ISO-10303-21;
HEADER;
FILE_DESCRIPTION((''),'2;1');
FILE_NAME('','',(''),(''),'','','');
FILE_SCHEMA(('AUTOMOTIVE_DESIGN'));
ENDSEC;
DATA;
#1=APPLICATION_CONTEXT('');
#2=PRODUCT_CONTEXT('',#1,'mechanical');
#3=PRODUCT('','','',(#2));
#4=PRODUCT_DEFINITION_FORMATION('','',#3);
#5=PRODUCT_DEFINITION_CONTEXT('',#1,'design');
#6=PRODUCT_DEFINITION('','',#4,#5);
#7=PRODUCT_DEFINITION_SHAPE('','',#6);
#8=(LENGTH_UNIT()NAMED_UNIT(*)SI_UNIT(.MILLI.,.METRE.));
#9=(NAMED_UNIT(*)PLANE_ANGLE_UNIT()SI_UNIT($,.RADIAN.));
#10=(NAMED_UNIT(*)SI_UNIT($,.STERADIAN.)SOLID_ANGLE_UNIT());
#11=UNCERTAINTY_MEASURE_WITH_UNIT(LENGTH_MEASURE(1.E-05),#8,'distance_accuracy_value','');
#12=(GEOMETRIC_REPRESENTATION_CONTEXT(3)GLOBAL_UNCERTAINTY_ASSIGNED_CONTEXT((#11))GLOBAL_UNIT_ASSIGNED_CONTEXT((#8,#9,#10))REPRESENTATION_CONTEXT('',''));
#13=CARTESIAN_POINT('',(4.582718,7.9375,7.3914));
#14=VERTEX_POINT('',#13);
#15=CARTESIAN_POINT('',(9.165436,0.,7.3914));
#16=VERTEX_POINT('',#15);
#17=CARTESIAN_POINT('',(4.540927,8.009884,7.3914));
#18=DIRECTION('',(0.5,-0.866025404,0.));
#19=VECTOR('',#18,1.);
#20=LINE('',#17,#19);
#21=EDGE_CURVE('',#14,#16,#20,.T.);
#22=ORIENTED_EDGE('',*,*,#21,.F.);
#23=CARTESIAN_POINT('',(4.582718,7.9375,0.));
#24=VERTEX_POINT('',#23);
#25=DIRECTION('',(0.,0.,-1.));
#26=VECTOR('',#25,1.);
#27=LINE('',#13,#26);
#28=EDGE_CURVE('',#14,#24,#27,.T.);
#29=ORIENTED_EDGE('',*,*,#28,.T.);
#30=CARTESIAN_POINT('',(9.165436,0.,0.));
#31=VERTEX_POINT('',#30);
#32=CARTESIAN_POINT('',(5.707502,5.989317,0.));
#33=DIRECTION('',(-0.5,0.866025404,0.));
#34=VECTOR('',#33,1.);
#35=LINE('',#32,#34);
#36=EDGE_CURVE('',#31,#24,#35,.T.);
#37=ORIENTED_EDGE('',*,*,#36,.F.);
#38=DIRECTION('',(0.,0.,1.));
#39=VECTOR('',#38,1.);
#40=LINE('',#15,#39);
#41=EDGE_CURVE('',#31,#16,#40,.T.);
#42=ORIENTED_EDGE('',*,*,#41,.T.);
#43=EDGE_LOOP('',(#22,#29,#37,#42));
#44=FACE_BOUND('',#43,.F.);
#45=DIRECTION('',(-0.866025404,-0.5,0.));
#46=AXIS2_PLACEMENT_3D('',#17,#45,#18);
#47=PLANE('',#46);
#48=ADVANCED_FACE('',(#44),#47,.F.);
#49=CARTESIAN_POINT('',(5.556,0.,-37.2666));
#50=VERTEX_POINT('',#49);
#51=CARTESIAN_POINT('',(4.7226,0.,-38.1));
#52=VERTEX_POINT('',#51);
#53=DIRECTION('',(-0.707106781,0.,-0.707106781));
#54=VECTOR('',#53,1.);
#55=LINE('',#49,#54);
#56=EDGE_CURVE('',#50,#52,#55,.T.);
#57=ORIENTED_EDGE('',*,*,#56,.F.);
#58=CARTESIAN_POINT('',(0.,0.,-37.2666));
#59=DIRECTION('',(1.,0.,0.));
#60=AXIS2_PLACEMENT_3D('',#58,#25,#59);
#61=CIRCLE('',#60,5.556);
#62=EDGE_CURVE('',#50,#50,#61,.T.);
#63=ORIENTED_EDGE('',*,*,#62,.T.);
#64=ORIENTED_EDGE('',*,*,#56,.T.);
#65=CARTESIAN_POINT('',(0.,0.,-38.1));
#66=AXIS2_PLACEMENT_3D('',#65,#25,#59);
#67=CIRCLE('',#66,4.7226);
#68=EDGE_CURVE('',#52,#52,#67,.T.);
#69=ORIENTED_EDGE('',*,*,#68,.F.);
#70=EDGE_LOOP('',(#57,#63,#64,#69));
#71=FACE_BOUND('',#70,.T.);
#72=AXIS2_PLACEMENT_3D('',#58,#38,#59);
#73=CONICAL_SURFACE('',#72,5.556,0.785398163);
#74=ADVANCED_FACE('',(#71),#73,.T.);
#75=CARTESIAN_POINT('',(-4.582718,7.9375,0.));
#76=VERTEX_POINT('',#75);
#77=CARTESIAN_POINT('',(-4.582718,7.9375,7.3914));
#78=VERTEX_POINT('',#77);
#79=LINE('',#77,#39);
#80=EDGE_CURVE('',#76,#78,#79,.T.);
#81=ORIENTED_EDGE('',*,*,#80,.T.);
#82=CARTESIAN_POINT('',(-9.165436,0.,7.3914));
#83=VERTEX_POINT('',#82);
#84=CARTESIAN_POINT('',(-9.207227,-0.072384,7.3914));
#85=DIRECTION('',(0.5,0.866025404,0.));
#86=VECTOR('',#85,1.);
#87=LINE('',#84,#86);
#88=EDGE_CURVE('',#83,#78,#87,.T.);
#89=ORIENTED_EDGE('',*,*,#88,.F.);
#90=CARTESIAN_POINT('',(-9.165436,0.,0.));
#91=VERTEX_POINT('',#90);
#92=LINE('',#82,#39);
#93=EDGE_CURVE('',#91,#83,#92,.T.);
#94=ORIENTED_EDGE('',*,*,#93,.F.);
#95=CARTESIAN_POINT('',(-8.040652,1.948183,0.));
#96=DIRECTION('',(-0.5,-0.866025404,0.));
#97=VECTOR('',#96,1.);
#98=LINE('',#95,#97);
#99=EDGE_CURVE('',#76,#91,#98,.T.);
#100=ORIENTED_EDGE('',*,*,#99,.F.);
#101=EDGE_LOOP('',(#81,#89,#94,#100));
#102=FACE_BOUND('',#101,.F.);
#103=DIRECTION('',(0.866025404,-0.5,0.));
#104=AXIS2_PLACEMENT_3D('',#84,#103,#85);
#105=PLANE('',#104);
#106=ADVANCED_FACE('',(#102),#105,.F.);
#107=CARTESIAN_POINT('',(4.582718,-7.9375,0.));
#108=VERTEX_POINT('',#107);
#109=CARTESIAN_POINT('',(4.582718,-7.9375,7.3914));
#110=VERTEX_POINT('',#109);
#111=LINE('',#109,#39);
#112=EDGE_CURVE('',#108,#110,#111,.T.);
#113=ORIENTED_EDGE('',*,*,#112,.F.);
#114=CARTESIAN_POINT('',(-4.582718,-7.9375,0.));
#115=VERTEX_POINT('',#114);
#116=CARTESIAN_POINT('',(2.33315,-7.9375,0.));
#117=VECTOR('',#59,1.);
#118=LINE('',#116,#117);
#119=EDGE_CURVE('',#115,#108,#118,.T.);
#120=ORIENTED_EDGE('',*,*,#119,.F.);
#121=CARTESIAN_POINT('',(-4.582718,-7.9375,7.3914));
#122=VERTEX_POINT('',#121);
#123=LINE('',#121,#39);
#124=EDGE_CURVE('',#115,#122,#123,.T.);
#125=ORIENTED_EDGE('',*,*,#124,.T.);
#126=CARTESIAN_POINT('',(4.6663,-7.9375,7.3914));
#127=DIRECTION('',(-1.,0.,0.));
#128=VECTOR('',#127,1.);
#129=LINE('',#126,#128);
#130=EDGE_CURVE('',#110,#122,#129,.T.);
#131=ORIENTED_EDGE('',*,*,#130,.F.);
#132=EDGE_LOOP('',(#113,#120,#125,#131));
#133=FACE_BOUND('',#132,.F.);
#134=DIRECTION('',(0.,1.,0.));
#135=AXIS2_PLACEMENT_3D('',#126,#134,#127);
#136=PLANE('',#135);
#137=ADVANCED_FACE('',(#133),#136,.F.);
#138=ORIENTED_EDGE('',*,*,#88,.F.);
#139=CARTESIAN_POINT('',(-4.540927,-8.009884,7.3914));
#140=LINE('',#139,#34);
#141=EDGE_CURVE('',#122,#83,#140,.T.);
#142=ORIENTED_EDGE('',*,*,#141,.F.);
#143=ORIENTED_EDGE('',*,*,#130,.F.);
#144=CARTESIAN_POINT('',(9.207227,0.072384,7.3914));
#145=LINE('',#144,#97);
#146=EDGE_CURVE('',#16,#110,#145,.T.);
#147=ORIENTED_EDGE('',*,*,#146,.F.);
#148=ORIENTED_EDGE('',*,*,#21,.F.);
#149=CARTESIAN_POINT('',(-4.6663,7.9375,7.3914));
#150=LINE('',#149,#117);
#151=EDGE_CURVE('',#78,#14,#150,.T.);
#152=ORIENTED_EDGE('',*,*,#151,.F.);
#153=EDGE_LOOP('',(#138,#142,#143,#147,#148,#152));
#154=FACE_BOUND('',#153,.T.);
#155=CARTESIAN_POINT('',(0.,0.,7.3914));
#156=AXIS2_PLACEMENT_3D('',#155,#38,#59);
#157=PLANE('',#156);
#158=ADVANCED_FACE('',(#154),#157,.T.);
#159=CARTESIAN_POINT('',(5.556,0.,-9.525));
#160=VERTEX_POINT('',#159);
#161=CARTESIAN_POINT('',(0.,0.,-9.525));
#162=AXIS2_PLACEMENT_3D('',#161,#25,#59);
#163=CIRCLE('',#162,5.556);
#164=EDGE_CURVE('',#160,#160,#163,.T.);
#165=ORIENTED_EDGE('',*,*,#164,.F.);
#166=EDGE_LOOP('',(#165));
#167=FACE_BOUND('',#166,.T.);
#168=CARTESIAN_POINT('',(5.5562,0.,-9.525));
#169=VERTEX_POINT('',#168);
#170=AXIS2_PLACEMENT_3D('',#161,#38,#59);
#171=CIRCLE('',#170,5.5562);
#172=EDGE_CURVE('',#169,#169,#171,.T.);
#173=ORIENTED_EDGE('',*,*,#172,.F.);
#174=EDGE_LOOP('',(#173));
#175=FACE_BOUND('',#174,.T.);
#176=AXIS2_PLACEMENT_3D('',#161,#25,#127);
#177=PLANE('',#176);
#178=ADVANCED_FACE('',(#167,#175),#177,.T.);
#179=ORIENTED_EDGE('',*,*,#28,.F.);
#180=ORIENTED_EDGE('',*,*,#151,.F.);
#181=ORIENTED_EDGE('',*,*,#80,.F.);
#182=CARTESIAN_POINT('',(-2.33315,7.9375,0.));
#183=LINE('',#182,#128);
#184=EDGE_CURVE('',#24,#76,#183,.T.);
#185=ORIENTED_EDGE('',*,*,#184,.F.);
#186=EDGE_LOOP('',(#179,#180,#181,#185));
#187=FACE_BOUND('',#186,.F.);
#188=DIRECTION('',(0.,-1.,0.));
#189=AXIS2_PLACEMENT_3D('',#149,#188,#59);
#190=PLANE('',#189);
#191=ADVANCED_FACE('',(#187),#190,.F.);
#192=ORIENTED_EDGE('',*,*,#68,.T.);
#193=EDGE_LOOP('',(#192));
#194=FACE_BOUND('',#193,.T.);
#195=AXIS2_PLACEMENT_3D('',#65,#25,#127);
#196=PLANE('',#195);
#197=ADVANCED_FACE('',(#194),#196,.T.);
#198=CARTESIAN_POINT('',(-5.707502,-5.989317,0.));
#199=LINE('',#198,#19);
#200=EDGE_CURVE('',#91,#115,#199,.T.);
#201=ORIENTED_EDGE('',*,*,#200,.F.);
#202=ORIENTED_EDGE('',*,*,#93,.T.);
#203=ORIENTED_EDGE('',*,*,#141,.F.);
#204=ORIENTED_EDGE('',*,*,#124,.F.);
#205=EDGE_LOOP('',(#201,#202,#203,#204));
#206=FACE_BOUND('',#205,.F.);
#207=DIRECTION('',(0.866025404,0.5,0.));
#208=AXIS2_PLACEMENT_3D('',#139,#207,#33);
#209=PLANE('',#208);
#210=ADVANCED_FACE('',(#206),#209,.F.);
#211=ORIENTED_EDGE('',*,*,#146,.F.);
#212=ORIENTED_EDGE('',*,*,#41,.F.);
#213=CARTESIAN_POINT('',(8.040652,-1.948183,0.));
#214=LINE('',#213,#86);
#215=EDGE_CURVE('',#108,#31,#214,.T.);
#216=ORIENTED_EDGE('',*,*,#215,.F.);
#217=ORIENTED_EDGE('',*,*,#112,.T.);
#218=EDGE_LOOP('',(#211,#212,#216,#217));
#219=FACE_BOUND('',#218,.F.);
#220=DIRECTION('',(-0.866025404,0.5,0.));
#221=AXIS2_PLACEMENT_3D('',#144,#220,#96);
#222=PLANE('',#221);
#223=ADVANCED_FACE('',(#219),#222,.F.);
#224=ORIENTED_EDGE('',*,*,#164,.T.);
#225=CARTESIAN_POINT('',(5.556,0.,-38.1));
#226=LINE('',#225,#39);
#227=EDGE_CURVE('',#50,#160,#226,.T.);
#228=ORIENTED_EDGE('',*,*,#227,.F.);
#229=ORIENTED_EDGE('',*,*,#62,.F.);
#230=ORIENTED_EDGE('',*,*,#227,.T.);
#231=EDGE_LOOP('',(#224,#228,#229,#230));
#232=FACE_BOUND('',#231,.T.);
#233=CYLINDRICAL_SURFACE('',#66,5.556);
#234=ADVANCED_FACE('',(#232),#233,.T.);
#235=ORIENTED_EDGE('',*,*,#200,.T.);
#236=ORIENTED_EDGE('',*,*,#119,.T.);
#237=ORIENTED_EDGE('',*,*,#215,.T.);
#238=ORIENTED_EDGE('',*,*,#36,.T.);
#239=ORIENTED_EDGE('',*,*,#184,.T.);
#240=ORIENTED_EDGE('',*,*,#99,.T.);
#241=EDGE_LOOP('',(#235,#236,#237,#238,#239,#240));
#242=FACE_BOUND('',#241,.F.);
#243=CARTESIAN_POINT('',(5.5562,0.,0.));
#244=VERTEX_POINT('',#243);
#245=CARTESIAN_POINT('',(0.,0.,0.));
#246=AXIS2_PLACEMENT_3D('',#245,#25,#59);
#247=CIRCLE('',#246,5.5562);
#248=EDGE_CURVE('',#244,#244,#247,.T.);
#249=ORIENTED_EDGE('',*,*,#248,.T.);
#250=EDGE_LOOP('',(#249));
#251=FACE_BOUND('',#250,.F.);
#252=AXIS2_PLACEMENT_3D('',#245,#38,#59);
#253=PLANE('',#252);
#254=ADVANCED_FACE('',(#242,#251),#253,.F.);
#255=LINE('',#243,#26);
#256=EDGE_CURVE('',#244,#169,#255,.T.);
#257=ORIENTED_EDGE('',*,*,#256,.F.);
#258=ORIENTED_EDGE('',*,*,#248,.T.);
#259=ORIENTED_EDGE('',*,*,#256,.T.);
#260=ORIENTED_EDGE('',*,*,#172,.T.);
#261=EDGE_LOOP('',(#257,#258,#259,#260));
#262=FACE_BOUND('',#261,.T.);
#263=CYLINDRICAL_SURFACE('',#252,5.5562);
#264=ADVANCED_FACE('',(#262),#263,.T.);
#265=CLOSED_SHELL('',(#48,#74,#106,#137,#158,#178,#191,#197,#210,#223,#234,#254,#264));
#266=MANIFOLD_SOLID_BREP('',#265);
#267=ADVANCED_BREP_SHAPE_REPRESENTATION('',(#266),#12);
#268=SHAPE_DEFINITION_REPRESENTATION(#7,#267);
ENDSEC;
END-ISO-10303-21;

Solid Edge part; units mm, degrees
sketch "Sketch1" plane through (0, 0, 0) normal (0, 0, 1) x (1, 0, 0)
  circle A0 centre (0, 0) radius 9.2075
  dimension "D1" = 18.415
extrude "Protrusion1" add sketch "Sketch1" along normal blind 7.3914
sketch "Sketch2" plane through (0, 0, 0) normal (0, 0, -1) x (1, 0, 0)
  circle A0 centre (0, 0) radius 5.5562
extrude "Protrusion2" add sketch "Sketch2" along normal blind 38.1
sketch "Sketch3" plane through (0, 0, -38.1) normal (0, 0, -1) x (1, 0, 0)
  circle A0 centre (0, 0) radius 5.556
extrude "Cutout1" cut sketch "Sketch3" against normal blind 28.575 flip side to cut
chamfer "Chamfer_1" distance 0.8334 angle 45 1 edges at (-5.556, 0, -38.1)
sketch "Sketch4" plane through (0, 0, 7.3914) normal (0, 0, 1) x (1, 0, 0)
  line L0 (-4.6663, 7.9375) -> (4.6663, 7.9375)
  dimension "D1" = 15.875
extrude "Cutout2" cut sketch "Sketch4" against normal up to next material side at (0, 7.9875, 7.3914)
pattern_circular "Pattern1" count 6 over 360 about axis through (0, 0, 7.3914) along (0, 0, 1) of "Cutout2"
properties part number "24102226"
